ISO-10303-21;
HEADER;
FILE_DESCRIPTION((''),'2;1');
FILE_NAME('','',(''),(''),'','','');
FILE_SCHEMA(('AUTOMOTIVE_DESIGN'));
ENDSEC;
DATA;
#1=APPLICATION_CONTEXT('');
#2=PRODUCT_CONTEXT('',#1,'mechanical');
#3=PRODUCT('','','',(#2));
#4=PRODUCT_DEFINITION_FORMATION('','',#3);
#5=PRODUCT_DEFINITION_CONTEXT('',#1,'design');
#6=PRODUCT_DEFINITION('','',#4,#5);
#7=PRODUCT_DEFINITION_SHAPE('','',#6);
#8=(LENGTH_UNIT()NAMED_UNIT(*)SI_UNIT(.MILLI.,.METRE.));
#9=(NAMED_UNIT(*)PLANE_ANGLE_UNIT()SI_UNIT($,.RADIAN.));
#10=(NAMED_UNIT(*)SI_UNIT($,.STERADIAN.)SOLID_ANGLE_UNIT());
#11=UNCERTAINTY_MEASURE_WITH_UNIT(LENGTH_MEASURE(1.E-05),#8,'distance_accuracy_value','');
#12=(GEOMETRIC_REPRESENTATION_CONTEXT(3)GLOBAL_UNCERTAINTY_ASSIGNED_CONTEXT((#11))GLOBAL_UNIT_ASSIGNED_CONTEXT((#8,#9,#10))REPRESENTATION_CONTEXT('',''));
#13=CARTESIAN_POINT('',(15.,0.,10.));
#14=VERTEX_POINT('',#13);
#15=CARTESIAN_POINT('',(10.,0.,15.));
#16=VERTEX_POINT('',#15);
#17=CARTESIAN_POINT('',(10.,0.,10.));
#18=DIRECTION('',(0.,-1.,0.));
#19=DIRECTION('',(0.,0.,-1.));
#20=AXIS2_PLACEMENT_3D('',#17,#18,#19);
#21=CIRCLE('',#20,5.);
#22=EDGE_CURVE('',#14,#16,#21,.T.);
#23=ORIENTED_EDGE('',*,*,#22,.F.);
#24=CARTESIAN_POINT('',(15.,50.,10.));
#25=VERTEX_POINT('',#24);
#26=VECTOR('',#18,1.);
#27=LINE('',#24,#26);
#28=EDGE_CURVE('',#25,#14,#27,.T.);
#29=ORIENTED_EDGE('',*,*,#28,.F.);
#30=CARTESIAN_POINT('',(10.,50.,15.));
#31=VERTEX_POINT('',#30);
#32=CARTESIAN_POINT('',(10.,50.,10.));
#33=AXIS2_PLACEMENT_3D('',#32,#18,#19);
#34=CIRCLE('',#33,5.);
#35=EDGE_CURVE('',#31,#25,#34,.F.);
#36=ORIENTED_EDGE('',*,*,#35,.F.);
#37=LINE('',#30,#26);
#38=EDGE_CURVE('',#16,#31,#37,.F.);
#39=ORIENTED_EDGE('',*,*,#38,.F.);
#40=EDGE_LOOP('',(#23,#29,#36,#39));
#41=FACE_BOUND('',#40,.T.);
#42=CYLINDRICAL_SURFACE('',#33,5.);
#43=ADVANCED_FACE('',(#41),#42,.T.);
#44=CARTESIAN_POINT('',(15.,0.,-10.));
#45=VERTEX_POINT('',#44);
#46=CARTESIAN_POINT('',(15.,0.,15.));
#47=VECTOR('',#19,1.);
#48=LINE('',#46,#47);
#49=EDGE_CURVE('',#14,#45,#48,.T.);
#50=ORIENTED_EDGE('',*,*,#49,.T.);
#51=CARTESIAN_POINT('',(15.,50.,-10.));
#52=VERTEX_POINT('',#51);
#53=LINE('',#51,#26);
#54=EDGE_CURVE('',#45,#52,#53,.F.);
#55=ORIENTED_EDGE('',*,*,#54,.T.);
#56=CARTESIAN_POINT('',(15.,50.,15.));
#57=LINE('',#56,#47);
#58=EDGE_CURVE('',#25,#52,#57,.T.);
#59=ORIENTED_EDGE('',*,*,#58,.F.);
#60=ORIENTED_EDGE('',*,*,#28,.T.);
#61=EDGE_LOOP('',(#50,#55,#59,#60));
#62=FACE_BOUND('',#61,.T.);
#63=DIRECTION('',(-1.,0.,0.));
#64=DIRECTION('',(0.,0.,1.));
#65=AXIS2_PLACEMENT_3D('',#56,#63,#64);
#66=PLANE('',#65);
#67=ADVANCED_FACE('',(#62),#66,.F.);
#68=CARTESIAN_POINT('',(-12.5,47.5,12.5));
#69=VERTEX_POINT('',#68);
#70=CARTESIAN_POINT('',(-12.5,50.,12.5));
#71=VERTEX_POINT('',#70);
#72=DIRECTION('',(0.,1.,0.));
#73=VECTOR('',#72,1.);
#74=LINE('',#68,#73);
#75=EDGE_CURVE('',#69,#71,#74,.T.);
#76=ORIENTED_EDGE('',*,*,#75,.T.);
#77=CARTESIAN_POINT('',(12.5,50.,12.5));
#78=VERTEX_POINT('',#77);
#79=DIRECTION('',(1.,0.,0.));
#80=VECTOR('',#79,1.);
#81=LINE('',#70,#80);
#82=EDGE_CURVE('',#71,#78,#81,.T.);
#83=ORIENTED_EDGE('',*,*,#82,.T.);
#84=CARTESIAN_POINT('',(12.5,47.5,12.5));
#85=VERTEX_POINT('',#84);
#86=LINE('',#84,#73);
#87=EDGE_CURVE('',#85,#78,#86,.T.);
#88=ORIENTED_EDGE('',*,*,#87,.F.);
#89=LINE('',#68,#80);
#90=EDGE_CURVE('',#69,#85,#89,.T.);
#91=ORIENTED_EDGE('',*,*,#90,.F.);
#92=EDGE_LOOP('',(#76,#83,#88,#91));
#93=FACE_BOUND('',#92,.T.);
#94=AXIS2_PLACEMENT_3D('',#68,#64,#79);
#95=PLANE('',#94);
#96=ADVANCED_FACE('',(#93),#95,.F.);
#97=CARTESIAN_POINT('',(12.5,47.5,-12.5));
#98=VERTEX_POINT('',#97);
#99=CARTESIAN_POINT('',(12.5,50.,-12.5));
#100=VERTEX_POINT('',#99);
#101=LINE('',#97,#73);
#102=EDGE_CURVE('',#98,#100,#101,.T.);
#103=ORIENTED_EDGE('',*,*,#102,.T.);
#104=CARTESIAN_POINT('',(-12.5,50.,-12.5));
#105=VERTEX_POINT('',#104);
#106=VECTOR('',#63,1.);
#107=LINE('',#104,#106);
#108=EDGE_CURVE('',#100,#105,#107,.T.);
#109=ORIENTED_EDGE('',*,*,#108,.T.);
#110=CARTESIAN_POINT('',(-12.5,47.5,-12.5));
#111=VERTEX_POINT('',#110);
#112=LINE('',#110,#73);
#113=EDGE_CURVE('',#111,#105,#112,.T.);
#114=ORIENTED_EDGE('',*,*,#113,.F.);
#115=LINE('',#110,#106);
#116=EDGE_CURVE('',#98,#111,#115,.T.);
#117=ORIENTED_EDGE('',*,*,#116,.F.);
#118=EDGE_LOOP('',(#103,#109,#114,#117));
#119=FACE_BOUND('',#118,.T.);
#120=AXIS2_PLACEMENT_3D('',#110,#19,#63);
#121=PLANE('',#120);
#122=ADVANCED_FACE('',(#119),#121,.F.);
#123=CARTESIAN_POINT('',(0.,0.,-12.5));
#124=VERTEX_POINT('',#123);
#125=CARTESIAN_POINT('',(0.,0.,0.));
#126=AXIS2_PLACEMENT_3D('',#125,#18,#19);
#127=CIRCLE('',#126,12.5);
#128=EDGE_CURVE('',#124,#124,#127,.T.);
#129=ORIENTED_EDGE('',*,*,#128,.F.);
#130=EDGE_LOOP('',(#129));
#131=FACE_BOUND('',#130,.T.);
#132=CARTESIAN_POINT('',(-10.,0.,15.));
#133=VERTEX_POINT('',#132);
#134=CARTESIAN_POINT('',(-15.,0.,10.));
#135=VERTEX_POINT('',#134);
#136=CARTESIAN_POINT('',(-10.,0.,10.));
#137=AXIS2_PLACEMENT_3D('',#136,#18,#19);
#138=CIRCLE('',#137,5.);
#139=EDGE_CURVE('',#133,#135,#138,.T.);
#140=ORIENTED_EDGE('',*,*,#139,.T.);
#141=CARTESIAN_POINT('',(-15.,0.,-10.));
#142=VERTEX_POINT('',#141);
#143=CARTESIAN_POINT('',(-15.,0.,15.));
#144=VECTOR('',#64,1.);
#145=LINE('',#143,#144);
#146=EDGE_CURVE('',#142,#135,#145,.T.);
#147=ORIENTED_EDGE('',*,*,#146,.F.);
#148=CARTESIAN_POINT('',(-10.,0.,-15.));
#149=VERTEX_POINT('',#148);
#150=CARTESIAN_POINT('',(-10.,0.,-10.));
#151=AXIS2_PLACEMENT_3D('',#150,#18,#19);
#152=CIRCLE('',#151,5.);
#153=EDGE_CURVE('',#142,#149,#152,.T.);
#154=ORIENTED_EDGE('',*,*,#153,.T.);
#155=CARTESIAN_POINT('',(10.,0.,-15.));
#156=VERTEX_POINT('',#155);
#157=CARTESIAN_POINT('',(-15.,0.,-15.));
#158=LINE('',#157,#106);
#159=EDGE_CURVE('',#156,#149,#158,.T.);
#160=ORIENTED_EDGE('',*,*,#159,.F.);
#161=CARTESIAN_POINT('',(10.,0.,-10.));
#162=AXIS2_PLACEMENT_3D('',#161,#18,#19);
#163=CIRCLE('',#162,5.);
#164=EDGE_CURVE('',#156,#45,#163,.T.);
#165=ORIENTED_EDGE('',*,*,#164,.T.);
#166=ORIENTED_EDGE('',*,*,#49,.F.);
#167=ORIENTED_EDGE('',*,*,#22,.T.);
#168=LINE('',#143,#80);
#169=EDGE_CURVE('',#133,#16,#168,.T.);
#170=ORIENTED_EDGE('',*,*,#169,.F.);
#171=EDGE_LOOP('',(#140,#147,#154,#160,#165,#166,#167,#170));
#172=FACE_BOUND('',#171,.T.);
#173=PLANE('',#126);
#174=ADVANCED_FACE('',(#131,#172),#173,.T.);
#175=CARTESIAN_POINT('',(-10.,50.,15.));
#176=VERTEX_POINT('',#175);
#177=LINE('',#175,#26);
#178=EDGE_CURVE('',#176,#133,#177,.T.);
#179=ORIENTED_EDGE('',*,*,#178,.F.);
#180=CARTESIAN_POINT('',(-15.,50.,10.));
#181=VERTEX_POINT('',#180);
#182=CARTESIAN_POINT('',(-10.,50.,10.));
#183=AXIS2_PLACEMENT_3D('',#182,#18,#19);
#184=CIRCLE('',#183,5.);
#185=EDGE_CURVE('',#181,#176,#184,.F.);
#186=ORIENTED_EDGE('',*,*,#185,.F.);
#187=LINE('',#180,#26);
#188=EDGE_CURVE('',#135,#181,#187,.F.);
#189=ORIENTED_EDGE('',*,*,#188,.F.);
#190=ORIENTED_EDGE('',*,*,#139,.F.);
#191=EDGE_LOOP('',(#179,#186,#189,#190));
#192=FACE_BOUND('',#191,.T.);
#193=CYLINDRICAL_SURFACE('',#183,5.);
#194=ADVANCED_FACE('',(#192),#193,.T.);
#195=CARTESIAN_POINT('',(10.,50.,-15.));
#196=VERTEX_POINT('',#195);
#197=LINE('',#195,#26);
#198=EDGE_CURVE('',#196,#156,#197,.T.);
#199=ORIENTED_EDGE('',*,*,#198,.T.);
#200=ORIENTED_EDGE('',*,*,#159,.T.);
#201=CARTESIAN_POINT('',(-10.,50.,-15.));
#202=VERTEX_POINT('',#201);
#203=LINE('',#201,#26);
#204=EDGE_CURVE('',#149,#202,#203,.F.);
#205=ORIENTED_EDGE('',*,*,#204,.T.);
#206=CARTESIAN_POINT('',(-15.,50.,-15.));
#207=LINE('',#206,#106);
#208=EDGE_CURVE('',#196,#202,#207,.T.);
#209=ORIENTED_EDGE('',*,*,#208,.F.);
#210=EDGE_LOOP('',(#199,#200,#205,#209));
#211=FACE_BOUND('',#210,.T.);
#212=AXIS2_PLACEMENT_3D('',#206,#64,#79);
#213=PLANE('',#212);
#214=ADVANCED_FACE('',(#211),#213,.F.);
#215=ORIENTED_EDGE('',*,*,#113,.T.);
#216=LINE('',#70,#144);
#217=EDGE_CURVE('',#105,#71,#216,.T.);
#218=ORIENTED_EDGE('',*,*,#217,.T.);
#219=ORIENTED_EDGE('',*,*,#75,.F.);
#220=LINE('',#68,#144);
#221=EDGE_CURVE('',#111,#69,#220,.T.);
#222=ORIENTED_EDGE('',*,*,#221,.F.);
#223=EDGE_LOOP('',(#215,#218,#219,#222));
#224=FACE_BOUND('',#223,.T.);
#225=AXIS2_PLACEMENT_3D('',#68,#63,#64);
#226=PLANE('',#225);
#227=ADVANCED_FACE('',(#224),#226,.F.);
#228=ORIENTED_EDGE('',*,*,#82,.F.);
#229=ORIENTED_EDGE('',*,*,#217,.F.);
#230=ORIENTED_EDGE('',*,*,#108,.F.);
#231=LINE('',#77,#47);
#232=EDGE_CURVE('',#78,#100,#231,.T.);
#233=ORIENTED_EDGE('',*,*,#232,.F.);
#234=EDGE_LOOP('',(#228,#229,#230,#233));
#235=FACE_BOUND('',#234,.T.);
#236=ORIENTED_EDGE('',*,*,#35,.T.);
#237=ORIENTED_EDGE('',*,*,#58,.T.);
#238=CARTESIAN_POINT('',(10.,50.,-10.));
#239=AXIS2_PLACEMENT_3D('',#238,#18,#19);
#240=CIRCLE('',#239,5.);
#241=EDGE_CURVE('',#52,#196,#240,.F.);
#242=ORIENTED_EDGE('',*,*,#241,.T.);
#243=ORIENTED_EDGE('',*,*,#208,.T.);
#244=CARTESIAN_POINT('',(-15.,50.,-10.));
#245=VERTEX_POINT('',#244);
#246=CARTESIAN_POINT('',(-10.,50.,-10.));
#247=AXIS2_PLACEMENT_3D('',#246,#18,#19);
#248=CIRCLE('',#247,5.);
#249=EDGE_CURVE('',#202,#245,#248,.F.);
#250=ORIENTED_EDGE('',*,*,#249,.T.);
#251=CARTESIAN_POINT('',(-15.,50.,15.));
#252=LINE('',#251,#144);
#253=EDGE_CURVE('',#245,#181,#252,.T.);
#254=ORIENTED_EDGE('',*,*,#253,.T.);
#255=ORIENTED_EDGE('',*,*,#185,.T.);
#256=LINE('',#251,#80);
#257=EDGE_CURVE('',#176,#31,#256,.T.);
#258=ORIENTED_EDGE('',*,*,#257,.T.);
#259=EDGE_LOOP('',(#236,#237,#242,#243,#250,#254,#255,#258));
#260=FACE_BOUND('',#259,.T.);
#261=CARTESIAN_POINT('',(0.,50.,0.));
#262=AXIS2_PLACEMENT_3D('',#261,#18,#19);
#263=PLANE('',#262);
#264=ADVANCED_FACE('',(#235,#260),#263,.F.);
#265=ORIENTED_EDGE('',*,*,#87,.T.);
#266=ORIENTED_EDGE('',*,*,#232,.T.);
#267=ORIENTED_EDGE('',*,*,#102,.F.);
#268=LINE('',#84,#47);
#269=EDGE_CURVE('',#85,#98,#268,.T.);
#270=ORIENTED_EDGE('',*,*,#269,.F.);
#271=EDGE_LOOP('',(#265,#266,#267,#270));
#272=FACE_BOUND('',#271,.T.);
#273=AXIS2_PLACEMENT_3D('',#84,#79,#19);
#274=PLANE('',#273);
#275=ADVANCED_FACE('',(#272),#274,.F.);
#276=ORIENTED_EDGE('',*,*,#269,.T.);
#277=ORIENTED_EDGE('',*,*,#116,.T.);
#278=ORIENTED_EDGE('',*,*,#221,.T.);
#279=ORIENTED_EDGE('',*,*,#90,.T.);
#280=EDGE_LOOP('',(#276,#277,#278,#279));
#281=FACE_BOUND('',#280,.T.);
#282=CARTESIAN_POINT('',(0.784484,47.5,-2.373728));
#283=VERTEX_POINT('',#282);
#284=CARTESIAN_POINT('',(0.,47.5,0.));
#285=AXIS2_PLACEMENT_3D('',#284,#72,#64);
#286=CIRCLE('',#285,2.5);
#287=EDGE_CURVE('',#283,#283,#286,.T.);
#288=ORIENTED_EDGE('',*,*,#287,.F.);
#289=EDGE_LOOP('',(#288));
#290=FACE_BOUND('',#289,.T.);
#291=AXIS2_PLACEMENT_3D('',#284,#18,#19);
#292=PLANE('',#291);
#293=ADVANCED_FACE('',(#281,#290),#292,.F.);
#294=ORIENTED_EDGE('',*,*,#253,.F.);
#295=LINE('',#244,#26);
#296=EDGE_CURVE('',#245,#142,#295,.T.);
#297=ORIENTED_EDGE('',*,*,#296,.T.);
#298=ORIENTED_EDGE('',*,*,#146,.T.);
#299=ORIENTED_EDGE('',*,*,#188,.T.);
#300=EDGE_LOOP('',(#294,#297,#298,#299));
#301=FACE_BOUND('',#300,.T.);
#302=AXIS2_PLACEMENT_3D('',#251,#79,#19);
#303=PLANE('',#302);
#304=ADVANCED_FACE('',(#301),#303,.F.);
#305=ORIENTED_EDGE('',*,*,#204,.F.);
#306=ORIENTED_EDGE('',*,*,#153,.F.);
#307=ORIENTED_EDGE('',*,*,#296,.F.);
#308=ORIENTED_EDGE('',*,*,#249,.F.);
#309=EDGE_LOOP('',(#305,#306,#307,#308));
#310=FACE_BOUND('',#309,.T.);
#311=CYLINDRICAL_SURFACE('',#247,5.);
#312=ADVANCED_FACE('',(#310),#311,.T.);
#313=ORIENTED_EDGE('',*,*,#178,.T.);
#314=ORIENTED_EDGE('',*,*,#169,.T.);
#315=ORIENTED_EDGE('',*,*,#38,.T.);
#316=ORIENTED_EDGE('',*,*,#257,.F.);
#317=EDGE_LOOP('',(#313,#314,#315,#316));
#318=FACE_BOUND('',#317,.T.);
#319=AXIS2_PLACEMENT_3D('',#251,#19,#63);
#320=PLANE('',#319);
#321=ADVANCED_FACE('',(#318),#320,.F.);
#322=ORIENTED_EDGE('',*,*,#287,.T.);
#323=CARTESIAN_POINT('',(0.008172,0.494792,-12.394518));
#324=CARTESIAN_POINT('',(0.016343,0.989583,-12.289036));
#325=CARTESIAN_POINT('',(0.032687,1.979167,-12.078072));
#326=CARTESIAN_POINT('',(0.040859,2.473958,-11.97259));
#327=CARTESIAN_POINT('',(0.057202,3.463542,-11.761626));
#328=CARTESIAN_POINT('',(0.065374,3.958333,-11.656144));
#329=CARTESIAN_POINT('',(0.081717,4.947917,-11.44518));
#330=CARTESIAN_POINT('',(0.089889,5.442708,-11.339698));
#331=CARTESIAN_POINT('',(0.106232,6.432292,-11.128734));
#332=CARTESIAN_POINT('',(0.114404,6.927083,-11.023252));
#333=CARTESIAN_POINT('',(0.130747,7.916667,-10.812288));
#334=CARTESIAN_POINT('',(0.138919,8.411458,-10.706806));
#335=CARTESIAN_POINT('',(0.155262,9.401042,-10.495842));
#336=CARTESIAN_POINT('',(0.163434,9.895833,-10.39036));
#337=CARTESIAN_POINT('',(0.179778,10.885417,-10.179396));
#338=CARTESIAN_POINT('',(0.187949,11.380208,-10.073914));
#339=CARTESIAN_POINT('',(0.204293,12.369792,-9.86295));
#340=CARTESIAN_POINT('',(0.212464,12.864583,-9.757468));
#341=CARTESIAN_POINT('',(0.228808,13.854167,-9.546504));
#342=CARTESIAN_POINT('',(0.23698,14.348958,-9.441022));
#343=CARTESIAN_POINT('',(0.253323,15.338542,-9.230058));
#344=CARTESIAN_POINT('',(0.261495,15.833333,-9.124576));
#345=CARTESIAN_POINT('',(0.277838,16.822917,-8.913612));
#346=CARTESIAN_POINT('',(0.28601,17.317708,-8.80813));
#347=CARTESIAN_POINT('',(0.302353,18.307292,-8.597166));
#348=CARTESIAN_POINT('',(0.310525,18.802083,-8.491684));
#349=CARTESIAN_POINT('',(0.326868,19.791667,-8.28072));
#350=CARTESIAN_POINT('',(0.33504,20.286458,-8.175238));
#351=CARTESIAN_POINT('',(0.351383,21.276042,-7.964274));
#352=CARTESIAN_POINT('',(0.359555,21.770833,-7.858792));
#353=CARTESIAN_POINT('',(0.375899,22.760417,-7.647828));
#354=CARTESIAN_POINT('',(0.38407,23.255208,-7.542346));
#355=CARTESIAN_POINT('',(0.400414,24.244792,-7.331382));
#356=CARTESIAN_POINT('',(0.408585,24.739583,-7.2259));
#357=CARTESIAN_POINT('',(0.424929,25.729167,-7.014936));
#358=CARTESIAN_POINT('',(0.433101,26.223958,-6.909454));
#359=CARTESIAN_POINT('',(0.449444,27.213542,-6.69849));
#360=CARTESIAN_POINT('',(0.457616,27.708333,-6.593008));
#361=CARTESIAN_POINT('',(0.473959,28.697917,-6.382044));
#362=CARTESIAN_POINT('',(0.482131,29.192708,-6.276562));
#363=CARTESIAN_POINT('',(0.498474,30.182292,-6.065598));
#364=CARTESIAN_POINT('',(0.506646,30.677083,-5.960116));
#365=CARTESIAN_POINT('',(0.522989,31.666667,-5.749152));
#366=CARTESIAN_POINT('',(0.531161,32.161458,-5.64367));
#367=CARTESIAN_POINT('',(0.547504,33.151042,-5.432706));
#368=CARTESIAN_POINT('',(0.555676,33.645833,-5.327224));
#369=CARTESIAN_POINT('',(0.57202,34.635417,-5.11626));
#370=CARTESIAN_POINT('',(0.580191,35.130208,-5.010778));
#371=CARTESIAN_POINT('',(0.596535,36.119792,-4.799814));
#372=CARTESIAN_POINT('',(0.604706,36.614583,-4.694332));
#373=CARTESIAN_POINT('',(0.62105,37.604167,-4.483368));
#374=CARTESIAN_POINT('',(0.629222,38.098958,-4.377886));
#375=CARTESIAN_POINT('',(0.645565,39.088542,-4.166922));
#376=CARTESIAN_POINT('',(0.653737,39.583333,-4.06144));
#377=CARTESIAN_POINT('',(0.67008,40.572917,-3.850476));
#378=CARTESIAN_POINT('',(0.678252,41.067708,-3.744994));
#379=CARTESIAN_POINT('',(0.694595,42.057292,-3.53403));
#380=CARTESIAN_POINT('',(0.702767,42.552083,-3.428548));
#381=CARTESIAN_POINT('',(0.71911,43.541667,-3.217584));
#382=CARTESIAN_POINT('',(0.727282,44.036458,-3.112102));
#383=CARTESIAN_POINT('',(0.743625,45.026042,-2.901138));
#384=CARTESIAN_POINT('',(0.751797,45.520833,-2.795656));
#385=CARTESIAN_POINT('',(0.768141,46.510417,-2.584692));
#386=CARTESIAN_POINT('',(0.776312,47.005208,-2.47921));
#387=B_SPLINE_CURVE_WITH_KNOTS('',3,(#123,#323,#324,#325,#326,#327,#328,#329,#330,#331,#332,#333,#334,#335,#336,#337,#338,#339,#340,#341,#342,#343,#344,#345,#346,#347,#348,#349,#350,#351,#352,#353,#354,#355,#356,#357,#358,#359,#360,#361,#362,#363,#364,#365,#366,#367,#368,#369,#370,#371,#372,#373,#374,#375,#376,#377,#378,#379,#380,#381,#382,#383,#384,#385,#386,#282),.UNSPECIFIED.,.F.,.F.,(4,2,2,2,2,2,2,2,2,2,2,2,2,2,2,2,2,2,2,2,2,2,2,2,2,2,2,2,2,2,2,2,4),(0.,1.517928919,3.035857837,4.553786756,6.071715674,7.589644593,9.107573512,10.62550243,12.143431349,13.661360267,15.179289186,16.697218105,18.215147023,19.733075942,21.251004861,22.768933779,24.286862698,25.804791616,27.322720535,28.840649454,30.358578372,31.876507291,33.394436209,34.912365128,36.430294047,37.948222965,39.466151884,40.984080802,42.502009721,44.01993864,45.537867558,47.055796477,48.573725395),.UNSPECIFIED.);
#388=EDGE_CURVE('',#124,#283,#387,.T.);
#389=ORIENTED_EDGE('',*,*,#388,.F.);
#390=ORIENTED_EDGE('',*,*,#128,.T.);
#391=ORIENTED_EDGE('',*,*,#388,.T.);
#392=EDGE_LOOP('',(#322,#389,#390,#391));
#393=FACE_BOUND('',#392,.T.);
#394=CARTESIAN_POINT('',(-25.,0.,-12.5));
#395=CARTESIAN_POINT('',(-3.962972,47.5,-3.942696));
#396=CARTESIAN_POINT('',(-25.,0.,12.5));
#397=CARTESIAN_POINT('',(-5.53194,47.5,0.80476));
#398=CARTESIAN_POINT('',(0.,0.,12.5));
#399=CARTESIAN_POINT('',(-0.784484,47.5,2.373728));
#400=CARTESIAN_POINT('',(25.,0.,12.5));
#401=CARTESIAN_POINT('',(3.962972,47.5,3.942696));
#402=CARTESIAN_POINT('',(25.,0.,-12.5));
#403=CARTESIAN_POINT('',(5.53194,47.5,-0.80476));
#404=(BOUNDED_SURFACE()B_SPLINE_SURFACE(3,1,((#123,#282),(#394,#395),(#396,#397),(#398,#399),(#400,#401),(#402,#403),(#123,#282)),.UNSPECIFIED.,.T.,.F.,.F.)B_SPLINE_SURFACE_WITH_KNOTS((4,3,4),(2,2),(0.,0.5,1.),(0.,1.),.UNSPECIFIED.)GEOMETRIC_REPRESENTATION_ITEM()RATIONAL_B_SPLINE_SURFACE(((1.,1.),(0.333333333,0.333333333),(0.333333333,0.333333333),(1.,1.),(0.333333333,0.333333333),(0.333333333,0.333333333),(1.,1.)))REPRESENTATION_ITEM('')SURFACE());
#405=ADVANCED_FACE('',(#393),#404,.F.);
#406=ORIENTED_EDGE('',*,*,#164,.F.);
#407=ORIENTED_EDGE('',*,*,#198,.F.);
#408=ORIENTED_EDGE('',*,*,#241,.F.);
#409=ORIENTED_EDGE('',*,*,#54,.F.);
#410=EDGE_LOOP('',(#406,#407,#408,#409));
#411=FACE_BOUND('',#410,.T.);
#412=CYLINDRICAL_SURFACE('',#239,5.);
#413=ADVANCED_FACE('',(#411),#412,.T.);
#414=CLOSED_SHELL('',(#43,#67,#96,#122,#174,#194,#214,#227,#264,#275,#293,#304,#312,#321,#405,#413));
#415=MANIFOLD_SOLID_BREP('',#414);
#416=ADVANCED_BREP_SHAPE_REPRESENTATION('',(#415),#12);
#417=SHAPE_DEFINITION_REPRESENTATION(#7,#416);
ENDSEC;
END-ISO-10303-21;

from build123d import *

# Parameters (mm, degrees)
SKETCH2_W           = 30
SKETCH2_H           = 30
BOSS_EXTRUDE1_DEPTH = 50
SKETCH3_W           = 25
SKETCH3_H           = 25
CUT_EXTRUDE1_DEPTH  = 2.5
FILLET1_R           = 5


with BuildPart() as part:
    # Sketch2 → Boss-Extrude1 (new body)
    with BuildSketch(Plane(origin=(0, 0, 0), x_dir=(1, 0, 0), z_dir=(0, 1, 0))):
        Rectangle(SKETCH2_W, SKETCH2_H)
    extrude(amount=BOSS_EXTRUDE1_DEPTH)

    # Sketch3 → Cut-Extrude1 (cut)
    with BuildSketch(Plane(origin=(0, 50, 0), x_dir=(1, 0, 0), z_dir=(0, 1, 0))):
        Rectangle(SKETCH3_W, SKETCH3_H)
    extrude(amount=-CUT_EXTRUDE1_DEPTH, mode=Mode.SUBTRACT)

    # Fillet1
    fillet1_edges = [part.edges().sort_by_distance(p)[0] for p in [
        (15, 25, 15),
        (-15, 25, 15),
        (-15, 25, -15),
        (15, 25, -15),
    ]]
    fillet(fillet1_edges, radius=FILLET1_R)

    # Cut-Loft2: read off the stored shape, not the designer's step
    # Cut-Loft2: loft between two sections, ruled curve by curve
    cut_loft2_from = [
        Edge.make_bspline([(0, 0, -12.5), (-25, 0, -12.5), (-25, 0, 12.5), (0, 0, 12.5), (25, 0, 12.5), (25, 0, -12.5), (0, 0, -12.5)], [0, 0, 0, 0, 0.5, 0.5, 0.5, 1, 1, 1, 1], 3, [1, 0.333333333, 0.333333333, 1, 0.333333333, 0.333333333, 1]),
    ]
    cut_loft2_to = [
        Edge.make_bspline([(0.784484005, 47.5, -2.373728048), (-3.962972092, 47.5, -3.942696057), (-5.531940101, 47.5, 0.804760039), (-0.784484005, 47.5, 2.373728048), (3.962972092, 47.5, 3.942696057), (5.531940101, 47.5, -0.804760039), (0.784484005, 47.5, -2.373728048)], [0, 0, 0, 0, 0.5, 0.5, 0.5, 1, 1, 1, 1], 3, [1, 0.333333333, 0.333333333, 1, 0.333333333, 0.333333333, 1]),
    ]
    cut_loft2 = Solid(Shell([*[Face.make_surface_from_curves(cut_loft2_from[k], cut_loft2_to[k]) for k in range(1)], Face(Wire(cut_loft2_from)), Face(Wire(cut_loft2_to))]))
    add(cut_loft2, mode=Mode.SUBTRACT)


solid = part.part
